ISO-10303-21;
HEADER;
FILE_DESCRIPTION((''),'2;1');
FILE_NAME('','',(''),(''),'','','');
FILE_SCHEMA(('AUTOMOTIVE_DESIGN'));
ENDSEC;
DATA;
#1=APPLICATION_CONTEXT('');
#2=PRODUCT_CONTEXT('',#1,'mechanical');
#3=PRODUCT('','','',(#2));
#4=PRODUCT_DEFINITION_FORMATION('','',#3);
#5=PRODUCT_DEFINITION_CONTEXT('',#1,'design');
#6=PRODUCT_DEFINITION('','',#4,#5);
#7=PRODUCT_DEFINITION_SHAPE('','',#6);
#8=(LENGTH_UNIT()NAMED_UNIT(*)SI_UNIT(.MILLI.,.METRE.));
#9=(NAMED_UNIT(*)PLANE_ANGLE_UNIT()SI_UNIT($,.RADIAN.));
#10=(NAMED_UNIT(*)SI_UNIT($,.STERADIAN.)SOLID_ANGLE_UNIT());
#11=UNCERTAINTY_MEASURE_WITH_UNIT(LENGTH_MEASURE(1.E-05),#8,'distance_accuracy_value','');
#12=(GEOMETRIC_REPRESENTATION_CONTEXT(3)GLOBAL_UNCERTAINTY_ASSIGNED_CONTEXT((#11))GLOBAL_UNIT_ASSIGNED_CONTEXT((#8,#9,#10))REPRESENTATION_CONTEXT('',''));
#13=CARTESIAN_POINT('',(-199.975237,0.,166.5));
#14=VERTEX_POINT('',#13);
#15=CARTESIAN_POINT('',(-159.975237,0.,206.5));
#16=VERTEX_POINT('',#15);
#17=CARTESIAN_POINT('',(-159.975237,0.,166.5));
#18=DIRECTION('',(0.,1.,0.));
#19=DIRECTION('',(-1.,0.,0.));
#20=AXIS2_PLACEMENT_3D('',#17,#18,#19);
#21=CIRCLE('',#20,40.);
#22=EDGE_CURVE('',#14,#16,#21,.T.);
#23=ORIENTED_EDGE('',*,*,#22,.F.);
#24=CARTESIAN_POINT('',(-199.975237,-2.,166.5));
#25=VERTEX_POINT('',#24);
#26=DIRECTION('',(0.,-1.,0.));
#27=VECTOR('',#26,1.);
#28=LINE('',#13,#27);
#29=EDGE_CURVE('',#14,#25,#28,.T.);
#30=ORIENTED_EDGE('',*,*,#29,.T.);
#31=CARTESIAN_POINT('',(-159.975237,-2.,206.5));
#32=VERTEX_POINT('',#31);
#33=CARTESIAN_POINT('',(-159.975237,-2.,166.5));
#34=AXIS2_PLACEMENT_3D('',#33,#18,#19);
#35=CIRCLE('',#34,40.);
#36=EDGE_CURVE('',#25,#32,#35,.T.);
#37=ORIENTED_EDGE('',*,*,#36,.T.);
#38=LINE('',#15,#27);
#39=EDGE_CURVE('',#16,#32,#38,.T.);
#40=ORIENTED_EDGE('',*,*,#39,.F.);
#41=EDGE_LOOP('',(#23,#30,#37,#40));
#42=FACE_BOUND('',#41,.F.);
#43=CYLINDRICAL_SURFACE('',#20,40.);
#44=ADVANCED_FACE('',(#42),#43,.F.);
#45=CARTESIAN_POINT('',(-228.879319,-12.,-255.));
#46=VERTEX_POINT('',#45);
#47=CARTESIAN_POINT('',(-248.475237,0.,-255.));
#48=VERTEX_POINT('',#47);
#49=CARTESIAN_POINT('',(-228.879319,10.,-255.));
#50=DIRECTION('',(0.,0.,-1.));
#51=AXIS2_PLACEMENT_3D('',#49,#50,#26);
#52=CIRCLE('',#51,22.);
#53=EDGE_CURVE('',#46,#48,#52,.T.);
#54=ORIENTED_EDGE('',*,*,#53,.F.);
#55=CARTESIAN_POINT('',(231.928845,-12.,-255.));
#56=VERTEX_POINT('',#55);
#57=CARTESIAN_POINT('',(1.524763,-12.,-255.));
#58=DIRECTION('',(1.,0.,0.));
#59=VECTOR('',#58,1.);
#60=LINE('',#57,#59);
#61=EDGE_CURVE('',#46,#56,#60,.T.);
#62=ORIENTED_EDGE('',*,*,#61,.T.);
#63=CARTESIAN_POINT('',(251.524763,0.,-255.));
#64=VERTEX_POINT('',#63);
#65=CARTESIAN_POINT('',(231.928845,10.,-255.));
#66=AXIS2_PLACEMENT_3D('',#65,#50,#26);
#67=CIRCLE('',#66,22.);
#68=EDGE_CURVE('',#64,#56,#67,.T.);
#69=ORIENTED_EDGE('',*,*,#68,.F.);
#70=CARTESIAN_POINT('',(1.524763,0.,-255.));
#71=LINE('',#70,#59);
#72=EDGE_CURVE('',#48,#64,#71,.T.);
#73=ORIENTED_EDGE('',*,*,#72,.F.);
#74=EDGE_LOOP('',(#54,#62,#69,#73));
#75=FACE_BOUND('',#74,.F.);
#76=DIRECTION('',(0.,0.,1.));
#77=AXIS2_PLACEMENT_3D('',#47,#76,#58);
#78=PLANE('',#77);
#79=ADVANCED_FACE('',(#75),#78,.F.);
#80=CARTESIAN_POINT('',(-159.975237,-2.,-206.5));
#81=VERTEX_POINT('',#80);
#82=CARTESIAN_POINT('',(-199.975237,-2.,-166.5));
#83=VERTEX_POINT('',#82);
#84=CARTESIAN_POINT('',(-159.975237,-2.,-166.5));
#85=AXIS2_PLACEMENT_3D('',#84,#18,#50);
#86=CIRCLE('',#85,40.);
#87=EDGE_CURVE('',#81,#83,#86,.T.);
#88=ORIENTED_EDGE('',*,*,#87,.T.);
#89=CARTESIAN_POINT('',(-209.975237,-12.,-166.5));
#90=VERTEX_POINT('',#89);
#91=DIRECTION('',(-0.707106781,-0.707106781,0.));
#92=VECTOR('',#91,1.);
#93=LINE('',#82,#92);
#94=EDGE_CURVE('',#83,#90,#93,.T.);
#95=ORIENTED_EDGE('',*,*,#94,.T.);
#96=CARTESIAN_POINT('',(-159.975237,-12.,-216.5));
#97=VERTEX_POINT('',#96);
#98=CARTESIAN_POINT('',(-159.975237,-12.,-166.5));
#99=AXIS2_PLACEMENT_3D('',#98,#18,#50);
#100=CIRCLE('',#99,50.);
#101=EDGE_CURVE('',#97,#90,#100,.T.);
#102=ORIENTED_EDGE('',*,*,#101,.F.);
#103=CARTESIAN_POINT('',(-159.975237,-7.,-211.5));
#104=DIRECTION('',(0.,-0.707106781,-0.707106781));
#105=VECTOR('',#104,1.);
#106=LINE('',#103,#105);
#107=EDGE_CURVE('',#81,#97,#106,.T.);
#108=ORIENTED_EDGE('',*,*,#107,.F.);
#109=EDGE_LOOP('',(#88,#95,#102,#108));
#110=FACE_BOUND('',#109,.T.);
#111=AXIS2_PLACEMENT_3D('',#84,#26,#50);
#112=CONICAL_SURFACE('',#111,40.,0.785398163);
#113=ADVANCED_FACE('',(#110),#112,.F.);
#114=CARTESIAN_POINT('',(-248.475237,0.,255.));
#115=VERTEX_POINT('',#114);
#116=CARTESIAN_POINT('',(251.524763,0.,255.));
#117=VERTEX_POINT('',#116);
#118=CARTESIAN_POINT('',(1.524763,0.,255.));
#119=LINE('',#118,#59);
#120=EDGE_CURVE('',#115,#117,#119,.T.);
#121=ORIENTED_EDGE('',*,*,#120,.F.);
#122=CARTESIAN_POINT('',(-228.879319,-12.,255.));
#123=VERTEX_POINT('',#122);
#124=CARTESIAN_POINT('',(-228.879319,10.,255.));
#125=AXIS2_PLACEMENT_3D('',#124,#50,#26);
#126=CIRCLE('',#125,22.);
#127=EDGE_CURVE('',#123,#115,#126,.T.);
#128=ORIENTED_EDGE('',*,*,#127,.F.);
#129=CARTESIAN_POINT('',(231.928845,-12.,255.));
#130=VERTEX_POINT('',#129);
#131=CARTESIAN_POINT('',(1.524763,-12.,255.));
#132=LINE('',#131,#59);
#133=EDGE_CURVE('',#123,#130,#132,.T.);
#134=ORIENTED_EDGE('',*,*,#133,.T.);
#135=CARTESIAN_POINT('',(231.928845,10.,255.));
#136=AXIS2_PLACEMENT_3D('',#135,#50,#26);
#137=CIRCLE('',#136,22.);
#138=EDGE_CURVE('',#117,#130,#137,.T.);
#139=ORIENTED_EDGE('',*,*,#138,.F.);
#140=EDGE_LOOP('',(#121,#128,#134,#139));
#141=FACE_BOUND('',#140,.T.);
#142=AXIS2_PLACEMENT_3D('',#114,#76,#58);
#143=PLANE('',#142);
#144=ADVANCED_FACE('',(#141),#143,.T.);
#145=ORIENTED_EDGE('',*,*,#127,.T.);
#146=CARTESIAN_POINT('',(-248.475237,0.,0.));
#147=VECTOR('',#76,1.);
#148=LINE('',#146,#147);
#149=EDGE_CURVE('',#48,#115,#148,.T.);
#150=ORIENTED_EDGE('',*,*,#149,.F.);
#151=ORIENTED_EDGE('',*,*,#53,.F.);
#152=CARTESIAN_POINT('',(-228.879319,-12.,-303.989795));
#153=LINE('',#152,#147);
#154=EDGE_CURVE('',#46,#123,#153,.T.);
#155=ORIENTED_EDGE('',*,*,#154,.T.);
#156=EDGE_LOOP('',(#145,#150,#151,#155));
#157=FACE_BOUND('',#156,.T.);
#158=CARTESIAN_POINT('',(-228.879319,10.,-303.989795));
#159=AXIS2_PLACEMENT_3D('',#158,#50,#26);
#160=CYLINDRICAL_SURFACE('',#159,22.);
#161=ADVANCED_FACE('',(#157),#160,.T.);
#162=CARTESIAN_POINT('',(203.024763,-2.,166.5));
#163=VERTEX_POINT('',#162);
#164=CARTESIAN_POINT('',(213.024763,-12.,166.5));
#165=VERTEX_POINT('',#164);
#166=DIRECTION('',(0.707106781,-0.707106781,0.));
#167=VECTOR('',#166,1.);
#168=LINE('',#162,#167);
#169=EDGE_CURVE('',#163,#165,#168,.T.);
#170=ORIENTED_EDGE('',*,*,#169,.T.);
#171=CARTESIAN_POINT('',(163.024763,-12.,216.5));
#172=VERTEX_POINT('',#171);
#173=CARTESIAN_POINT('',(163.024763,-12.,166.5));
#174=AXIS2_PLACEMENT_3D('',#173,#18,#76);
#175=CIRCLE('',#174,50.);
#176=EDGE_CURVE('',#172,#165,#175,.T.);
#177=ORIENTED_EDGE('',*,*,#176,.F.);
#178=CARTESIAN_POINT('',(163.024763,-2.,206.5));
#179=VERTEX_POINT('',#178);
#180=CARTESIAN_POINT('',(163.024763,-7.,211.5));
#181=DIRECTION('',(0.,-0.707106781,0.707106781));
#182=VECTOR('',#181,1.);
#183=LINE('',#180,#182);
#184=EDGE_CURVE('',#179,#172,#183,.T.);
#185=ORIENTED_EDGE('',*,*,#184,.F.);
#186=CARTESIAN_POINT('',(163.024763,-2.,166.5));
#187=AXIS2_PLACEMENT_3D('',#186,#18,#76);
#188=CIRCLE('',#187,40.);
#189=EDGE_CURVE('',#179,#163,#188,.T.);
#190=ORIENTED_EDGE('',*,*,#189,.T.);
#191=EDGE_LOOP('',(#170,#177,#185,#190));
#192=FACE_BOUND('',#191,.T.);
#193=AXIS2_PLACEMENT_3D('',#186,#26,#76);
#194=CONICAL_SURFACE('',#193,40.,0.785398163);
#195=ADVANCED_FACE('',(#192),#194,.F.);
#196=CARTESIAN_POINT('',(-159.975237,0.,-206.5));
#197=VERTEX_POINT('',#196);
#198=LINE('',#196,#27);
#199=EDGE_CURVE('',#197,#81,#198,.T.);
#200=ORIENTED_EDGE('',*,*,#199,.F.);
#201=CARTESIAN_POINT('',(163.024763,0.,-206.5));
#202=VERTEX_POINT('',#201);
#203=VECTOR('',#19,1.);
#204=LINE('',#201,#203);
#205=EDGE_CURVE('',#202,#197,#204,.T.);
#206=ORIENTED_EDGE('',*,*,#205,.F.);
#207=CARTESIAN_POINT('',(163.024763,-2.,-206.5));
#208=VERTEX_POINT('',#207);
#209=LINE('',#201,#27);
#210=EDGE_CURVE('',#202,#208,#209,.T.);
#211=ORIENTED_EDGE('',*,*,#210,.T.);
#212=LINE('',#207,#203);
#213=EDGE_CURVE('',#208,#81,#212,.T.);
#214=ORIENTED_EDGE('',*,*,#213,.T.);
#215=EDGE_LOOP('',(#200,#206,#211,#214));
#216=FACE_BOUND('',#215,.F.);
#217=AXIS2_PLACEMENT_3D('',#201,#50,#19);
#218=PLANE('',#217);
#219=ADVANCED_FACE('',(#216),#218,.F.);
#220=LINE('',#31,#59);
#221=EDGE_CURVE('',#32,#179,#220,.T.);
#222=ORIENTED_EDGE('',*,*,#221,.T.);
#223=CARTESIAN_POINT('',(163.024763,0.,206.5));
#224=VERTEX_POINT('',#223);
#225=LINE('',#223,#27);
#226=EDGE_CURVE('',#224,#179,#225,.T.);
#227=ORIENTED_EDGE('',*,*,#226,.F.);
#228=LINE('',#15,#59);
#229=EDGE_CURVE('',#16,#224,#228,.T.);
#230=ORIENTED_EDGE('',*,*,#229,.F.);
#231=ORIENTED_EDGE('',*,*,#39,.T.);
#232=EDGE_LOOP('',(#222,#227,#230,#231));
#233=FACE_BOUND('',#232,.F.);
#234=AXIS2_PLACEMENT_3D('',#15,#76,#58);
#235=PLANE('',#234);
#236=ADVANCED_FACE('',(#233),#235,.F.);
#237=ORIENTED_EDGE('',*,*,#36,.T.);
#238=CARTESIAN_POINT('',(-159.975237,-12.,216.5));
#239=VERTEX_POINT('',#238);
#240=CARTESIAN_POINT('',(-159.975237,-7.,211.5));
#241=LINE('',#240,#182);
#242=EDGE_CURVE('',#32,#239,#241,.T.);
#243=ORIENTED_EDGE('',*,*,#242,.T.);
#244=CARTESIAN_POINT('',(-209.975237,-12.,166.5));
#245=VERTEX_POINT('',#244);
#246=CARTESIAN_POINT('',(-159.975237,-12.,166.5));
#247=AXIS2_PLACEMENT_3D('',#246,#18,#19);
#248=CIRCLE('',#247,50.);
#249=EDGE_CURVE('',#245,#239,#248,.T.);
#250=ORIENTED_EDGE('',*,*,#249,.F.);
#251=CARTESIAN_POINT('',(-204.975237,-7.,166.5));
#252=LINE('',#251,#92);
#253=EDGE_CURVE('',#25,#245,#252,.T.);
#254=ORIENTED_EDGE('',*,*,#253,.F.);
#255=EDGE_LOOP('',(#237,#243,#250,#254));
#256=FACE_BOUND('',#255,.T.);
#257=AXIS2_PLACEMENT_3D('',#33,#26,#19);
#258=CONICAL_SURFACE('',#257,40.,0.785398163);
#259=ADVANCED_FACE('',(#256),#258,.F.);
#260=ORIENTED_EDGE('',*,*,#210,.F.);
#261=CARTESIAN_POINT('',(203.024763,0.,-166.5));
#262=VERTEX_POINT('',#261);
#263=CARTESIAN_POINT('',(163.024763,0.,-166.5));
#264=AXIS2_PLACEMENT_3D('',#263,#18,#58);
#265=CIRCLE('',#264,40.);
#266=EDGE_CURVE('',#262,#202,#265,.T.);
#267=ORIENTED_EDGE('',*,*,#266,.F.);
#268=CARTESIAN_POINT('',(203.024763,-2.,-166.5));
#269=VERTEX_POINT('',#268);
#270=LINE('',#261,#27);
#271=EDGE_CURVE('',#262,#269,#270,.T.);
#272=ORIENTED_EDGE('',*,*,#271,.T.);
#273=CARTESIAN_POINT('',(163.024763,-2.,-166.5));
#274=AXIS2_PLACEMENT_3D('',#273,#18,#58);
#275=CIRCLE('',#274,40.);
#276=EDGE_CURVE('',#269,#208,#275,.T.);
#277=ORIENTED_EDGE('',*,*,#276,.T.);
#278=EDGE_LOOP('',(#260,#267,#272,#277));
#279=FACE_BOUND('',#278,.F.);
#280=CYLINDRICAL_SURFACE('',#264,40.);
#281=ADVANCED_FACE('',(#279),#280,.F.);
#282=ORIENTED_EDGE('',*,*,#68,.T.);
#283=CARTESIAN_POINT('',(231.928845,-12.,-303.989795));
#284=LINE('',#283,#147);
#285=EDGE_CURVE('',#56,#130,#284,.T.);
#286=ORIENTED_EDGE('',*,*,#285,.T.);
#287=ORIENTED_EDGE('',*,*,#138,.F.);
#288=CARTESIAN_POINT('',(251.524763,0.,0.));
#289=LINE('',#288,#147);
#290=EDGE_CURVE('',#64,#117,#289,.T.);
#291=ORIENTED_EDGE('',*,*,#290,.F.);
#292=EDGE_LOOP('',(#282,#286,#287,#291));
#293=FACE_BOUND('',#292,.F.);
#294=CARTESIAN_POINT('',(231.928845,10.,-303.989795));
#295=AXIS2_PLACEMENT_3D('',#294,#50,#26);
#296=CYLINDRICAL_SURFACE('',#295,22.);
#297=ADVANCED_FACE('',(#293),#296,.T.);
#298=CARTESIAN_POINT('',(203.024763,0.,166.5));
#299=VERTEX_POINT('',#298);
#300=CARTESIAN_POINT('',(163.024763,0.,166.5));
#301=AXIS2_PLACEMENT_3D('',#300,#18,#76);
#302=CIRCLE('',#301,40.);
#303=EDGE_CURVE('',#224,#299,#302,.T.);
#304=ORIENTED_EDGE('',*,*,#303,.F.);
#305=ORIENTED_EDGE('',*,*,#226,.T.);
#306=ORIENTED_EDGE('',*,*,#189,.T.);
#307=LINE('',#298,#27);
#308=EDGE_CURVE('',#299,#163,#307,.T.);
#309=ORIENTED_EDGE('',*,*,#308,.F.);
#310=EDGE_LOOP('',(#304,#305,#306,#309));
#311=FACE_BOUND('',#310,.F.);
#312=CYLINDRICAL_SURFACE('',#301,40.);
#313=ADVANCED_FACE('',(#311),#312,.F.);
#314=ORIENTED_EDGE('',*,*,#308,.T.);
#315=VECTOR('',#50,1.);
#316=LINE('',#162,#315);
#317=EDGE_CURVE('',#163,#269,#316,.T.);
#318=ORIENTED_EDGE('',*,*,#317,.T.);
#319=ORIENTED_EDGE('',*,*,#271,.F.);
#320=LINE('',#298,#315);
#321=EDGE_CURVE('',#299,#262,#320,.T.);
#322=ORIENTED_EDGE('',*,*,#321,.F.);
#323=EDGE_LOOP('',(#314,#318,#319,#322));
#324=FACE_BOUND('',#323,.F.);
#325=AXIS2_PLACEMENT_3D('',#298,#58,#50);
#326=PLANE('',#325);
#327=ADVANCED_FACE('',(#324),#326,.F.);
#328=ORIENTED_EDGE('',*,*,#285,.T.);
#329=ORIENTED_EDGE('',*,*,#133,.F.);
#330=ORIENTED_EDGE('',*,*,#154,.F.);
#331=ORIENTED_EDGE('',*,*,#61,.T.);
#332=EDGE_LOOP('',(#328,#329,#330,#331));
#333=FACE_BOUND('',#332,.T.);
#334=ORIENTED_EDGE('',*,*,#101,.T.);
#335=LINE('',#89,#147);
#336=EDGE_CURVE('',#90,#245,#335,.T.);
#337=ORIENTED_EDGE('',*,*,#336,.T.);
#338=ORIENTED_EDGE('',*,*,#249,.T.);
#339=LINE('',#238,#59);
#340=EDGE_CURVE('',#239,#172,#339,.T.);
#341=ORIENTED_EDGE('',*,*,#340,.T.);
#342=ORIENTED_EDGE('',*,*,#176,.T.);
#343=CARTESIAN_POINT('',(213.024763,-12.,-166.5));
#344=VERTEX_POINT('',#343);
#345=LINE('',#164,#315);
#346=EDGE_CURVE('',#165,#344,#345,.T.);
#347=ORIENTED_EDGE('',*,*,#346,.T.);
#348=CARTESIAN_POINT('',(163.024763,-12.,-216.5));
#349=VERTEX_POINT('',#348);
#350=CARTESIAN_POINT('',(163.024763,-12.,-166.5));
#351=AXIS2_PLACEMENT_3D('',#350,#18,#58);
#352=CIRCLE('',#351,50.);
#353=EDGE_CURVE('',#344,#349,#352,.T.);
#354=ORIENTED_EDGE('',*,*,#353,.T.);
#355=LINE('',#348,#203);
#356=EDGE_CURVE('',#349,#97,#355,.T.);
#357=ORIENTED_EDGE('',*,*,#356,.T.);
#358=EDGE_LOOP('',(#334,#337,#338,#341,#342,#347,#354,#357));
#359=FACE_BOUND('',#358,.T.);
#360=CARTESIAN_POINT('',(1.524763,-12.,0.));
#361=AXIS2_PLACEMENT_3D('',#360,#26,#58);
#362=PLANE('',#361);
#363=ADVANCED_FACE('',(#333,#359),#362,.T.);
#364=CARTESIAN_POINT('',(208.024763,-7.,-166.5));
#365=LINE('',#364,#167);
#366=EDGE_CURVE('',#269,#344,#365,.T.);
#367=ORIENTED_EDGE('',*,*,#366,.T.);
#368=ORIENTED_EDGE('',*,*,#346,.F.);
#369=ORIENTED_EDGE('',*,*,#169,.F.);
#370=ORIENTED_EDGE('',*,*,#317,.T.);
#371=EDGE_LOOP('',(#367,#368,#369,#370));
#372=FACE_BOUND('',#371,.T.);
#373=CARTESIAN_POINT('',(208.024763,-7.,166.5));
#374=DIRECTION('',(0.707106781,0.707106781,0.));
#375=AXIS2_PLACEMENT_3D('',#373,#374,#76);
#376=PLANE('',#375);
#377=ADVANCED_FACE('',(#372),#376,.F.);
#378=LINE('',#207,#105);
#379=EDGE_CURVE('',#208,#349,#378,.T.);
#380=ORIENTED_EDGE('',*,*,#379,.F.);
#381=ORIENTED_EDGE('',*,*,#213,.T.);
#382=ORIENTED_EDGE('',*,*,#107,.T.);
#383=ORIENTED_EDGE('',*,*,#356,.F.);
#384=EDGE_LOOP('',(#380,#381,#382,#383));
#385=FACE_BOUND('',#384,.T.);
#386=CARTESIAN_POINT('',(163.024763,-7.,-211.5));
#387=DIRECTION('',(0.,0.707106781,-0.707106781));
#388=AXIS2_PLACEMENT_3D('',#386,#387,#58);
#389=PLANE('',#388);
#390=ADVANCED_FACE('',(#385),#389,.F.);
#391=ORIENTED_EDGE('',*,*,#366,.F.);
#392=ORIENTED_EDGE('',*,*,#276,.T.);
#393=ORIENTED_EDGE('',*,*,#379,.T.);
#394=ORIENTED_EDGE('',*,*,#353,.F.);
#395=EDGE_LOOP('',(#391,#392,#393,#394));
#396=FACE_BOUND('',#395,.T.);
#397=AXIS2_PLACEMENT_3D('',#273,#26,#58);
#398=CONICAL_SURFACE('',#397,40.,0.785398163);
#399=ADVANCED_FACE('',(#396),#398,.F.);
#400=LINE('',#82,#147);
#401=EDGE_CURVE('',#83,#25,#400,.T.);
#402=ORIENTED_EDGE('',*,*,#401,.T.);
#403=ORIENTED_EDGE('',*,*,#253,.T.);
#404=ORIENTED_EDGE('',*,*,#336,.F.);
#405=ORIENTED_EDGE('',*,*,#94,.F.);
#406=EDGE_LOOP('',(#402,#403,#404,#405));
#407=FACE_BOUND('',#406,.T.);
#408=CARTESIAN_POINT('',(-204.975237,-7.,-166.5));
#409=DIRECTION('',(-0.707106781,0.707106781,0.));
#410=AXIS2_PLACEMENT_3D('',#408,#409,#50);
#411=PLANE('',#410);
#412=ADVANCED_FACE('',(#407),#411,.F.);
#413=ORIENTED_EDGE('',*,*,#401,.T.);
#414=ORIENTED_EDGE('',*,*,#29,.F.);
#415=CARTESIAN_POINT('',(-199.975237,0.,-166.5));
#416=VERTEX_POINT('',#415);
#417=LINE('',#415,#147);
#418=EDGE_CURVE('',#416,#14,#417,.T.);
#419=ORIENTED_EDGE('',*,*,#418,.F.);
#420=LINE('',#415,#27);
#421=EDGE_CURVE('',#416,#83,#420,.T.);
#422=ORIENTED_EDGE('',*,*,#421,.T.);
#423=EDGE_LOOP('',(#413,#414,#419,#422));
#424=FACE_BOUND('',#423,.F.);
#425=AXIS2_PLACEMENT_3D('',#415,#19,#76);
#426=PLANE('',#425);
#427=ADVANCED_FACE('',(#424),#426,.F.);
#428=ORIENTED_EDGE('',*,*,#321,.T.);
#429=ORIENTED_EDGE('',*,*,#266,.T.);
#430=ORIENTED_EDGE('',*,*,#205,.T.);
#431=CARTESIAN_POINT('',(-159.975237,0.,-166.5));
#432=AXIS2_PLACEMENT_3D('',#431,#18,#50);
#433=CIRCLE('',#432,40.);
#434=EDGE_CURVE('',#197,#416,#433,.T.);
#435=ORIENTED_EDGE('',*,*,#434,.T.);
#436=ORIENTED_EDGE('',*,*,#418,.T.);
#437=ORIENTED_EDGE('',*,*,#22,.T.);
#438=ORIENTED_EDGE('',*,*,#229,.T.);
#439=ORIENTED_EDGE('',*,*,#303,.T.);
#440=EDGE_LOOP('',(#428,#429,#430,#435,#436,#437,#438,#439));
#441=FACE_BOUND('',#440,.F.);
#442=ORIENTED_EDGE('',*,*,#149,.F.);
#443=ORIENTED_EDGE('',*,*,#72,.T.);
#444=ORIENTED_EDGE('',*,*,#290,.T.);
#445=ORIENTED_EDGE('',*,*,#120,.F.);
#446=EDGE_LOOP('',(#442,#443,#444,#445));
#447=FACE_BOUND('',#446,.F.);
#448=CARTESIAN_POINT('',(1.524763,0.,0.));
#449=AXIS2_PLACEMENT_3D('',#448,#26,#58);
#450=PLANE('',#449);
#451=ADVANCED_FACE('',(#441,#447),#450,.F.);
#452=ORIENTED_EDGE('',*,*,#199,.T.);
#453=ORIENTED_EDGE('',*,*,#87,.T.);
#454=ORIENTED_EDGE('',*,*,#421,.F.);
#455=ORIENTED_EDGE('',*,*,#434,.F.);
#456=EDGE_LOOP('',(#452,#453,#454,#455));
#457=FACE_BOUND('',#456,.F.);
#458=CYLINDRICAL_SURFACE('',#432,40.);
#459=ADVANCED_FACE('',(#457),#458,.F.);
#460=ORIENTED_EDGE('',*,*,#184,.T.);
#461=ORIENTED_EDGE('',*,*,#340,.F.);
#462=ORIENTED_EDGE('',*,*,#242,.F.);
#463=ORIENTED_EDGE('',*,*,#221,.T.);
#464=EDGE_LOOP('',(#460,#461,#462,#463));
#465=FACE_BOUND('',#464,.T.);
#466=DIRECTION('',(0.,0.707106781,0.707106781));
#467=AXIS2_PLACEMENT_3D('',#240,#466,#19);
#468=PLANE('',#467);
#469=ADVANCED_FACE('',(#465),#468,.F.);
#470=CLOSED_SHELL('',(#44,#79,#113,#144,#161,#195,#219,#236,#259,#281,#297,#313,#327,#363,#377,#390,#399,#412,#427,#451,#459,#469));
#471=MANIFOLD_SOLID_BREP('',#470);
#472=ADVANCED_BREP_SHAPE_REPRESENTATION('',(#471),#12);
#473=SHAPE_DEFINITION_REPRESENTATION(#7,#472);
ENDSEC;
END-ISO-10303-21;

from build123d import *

# Parameters (mm, degrees)
F0_W        = 500
F0_H        = 510
F1_DEPTH    = 12
F2_SIZE     = 10
F3_T1_DEPTH = 607.9795897113


# Not quite as in the source:
# - a fillet or chamfer that OpenCascade refuses, or shapes differently, is made with other operations: its cross-section is extruded or revolved along the edge and cut away or added


with BuildPart() as f1:
    # F0 (on Front) → F1 (new body)
    with BuildSketch(Plane.XZ):
        with Locations((1.5247634146, 0)):
            Rectangle(F0_W, F0_H)
        with BuildLine():
            ThreePointArc((-199.9752365854, 166.5), (-188.2595078328, 194.7842712475), (-159.9752365854, 206.5))
            Line((-159.9752365854, 206.5), (163.0247634146, 206.5))
            ThreePointArc((163.0247634146, 206.5), (191.3090346621, 194.7842712475), (203.0247634146, 166.5))
            Line((203.0247634146, 166.5), (203.0247634146, -166.5))
            ThreePointArc((203.0247634146, -166.5), (191.3090346621, -194.7842712475), (163.0247634146, -206.5))
            Line((163.0247634146, -206.5), (-159.9752365854, -206.5))
            ThreePointArc((-159.9752365854, -206.5), (-188.2595078328, -194.7842712475), (-199.9752365854, -166.5))
            Line((-199.9752365854, -166.5), (-199.9752365854, 166.5))
        make_face(mode=Mode.SUBTRACT)
    extrude(amount=F1_DEPTH)

    # F2
    f2_edges = [f1.edges().sort_by_distance(p)[0] for p in [
        (1.524763, -12, 206.5),
        (-199.975237, -12, 0),
        (-188.259508, -12, 194.784271),
        (191.309035, -12, 194.784271),
        (203.024763, -12, 0),
        (191.309035, -12, -194.784271),
        (1.524763, -12, -206.5),
        (-188.259508, -12, -194.784271),
    ]]
    chamfer(f2_edges, length=F2_SIZE)

    # F3: fillet of radius 22 on 2 edges, made by hand

    # F3_s2 → F3_t1 (cut)
    with BuildSketch(Plane.XY.offset(-303.9897948557)):
        with BuildLine():
            ThreePointArc((-228.8793186431, -12), (-240.3684439362, -8.7616630393), (-248.4752365854, 0))
            Line((-248.4752365854, 0), (-248.4752365854, -12))
            Line((-248.4752365854, -12), (-228.8793186431, -12))
        make_face()
        with BuildLine():
            ThreePointArc((231.9288454724, -12), (243.4179707654, -8.7616630393), (251.5247634146, 0))
            Line((251.5247634146, 0), (251.5247634146, -12))
            Line((251.5247634146, -12), (231.9288454724, -12))
        make_face()
    extrude(amount=F3_T1_DEPTH, mode=Mode.SUBTRACT)


solid = f1.part
